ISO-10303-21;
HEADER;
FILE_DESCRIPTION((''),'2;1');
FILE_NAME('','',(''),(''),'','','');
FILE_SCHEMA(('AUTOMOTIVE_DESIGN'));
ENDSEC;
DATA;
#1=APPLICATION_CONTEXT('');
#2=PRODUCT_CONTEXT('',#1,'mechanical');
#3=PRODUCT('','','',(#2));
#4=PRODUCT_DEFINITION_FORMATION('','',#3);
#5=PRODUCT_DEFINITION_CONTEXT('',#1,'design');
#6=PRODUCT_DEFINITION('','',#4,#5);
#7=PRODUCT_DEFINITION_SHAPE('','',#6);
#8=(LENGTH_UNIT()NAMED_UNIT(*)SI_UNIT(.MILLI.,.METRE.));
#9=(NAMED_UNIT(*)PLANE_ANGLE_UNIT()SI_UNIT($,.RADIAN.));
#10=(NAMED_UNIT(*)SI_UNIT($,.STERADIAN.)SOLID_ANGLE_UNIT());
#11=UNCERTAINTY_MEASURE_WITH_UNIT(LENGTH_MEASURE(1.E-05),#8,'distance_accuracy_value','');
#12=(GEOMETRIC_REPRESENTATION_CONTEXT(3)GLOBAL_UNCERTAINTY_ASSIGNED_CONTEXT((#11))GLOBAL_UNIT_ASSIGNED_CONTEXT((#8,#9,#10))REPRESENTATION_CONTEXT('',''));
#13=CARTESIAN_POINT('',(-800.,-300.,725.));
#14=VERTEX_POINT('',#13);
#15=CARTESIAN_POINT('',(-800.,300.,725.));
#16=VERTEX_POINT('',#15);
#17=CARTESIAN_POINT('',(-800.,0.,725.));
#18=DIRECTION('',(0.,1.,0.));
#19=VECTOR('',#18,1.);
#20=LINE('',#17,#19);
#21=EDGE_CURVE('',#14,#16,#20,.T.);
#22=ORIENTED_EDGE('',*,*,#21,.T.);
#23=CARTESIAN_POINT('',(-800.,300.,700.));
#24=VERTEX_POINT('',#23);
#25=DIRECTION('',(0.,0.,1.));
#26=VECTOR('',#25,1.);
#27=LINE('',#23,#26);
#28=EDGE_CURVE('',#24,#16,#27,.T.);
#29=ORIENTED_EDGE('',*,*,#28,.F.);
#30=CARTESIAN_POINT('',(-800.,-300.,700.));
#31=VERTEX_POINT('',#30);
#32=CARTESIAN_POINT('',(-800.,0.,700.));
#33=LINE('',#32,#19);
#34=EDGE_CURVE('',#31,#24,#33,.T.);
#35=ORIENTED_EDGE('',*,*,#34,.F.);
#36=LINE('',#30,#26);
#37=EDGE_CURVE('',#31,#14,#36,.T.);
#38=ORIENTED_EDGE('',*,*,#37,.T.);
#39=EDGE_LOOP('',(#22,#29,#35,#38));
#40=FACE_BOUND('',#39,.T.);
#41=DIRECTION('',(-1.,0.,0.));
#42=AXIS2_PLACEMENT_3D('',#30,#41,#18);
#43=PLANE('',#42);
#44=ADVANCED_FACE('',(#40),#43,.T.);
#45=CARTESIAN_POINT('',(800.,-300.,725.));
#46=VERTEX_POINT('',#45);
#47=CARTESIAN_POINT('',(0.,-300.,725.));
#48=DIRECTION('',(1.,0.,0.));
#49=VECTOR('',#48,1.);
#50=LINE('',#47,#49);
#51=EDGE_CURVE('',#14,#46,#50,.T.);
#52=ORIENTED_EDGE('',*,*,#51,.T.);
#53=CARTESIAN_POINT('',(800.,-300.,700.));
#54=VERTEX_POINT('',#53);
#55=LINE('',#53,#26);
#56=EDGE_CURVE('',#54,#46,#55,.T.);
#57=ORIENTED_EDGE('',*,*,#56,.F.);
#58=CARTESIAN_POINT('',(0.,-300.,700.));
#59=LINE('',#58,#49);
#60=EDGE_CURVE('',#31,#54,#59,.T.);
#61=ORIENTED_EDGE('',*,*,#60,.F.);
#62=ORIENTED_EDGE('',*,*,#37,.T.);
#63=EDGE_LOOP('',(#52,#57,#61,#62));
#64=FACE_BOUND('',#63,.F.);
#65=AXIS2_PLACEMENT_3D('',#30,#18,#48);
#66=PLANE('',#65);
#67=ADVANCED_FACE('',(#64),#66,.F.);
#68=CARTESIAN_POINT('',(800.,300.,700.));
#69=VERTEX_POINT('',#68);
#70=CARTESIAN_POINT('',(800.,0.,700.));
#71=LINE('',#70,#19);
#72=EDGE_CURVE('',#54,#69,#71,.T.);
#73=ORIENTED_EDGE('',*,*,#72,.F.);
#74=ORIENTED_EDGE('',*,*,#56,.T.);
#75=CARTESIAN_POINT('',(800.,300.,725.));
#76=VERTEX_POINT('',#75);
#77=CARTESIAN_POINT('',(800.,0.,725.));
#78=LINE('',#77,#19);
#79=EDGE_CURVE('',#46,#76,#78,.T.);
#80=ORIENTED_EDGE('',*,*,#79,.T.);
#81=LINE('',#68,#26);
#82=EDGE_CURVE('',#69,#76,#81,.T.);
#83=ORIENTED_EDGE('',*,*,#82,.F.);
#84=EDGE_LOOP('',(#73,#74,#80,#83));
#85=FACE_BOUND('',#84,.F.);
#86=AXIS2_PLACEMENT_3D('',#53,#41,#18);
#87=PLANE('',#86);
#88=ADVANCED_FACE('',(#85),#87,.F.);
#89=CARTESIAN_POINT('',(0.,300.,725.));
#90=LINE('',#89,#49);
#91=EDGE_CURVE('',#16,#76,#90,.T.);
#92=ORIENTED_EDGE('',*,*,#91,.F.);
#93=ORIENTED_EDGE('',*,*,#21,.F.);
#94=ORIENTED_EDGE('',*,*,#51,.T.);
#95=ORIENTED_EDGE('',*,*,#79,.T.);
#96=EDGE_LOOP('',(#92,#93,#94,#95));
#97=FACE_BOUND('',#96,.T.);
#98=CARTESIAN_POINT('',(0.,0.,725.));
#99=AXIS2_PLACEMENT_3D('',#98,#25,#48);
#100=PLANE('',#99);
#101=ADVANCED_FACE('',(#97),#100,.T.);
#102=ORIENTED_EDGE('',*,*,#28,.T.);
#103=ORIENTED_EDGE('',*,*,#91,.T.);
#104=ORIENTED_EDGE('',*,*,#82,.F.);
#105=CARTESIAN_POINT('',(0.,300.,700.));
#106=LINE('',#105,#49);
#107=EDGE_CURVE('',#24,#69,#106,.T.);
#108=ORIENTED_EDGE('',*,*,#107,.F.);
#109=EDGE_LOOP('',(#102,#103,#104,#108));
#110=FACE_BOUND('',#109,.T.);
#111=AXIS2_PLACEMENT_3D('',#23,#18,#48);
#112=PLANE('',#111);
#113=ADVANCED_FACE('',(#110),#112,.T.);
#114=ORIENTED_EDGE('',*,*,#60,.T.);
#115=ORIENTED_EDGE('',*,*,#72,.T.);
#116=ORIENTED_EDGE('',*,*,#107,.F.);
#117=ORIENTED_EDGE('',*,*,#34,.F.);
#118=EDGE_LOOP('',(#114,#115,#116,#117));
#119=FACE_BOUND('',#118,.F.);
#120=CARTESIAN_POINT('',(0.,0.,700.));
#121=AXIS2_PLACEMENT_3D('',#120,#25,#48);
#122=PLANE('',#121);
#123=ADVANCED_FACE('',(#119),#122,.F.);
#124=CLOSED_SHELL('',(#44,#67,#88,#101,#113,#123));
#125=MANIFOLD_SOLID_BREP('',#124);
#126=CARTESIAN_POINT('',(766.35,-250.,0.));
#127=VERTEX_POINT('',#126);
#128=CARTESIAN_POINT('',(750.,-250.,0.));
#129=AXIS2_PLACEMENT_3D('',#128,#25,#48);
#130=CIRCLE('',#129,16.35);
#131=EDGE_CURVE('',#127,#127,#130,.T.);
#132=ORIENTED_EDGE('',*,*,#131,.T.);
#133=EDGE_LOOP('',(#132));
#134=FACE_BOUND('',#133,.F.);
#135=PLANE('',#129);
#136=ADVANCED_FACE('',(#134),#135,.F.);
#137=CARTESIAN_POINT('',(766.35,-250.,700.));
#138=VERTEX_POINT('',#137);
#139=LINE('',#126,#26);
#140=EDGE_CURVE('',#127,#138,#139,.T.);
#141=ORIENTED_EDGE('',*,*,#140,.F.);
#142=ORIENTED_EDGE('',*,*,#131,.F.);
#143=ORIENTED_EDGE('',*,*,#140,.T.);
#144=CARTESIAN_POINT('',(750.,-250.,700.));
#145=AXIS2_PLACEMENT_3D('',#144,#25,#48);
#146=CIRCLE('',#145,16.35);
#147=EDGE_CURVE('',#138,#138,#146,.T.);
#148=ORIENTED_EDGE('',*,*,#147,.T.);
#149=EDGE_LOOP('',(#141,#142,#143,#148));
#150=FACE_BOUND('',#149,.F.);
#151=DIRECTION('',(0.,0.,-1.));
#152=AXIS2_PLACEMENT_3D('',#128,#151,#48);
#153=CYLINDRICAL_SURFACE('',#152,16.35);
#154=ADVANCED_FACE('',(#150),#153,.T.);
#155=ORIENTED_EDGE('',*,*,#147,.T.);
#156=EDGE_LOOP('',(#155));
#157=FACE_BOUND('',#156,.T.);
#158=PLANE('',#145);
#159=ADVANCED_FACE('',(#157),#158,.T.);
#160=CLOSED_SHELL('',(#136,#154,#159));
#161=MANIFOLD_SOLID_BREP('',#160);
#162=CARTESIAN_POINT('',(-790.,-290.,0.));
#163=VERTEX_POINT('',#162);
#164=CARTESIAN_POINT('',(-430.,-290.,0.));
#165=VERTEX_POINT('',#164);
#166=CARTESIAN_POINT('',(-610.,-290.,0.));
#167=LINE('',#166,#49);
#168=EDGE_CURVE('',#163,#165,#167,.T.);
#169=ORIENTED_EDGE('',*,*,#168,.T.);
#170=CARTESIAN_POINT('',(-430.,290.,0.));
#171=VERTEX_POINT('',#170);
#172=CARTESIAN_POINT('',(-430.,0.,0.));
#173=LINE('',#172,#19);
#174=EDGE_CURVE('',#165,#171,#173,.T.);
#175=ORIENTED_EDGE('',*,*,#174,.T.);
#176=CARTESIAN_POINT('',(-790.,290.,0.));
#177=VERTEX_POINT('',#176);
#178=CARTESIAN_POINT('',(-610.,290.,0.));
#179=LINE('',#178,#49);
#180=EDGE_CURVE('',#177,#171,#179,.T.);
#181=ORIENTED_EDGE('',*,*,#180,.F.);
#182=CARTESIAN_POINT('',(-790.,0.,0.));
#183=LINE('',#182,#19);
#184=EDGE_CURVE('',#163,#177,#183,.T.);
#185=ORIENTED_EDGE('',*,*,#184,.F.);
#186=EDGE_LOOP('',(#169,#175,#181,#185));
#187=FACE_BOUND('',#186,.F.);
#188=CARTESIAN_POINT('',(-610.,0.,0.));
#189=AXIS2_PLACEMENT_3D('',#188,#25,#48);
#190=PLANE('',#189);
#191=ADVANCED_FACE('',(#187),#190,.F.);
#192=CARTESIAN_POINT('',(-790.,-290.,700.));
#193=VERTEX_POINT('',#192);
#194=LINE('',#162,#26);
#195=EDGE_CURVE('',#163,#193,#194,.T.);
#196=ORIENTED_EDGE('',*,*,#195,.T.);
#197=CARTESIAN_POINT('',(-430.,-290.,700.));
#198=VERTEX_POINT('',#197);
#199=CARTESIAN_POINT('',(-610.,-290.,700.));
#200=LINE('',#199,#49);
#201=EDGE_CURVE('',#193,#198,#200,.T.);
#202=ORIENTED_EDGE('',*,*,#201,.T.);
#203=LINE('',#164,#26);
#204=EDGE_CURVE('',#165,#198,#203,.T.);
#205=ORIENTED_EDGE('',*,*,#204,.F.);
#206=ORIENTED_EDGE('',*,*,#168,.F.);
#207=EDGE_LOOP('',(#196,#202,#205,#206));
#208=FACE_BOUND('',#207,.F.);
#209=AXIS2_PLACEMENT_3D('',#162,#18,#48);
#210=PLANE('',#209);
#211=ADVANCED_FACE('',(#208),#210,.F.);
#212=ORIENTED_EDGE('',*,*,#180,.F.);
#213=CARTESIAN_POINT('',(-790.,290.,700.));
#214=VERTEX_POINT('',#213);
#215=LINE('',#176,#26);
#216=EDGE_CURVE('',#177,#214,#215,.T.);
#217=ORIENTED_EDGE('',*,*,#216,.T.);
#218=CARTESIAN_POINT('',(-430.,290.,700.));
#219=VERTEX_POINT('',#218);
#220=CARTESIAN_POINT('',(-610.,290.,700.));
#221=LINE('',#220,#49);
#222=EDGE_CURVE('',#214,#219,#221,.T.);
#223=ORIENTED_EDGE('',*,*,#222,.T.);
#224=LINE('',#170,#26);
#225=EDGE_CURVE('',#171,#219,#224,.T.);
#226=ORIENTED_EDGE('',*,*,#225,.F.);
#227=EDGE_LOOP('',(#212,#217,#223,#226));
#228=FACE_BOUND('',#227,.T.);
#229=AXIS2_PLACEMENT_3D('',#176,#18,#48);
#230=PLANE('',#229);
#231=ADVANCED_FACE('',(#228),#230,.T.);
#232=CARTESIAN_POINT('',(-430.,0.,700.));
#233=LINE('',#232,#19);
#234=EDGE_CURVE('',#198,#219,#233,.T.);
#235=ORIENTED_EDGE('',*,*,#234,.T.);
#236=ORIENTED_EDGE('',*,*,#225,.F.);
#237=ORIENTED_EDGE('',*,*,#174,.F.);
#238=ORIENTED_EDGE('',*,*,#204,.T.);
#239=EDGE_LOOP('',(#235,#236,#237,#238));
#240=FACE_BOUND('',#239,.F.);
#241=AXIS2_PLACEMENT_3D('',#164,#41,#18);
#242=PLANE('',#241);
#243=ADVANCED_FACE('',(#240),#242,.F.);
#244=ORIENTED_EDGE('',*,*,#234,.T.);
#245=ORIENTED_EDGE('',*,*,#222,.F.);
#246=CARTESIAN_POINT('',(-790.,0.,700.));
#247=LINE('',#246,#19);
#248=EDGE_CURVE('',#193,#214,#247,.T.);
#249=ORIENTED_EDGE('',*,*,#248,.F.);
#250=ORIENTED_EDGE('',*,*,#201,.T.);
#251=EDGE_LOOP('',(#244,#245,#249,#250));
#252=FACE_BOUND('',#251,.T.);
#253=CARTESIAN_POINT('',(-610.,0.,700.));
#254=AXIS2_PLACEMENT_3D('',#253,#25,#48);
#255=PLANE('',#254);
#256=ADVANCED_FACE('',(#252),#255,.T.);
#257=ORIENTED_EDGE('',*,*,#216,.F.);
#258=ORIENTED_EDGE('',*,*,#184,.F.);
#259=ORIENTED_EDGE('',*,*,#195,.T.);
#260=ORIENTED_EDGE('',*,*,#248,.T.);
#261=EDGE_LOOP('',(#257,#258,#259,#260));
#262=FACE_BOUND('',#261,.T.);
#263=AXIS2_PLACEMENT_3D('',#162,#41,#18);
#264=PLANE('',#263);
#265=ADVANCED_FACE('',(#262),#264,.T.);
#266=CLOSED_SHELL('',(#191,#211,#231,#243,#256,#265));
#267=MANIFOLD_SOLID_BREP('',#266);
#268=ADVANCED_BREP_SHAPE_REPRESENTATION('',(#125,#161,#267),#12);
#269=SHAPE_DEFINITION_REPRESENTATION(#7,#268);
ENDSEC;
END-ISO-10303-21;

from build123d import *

# Parameters (mm, degrees)
F1_START = 700
F0_W     = 1600
F0_H     = 600
F1_DEPTH = 25
F2_W     = 360
F2_H     = 580
F3_DEPTH = 700
F4_R     = 16.35
F5_DEPTH = 700


# Not quite as in the source:
# - a feature names something its author has since deleted; it is built from what else it names


with BuildPart() as f1:
    # F0 (on Top) → F1 (new body)
    with BuildSketch(Plane.XY.offset(F1_START)):
        Rectangle(F0_W, F0_H)
    extrude(amount=F1_DEPTH)


with BuildPart() as f3:
    # F2 (on Top) → F3 (new body)
    with BuildSketch(Plane.XY):
        with Locations((-610, 0)):
            Rectangle(F2_W, F2_H)
    extrude(amount=F3_DEPTH)


with BuildPart() as f5:
    # F4 (on Top) → F5 (new body)
    with BuildSketch(Plane.XY):
        with Locations((750, -250)):
            Circle(F4_R)
    extrude(amount=F5_DEPTH)


solid = Compound([f1.part, f3.part, f5.part])
